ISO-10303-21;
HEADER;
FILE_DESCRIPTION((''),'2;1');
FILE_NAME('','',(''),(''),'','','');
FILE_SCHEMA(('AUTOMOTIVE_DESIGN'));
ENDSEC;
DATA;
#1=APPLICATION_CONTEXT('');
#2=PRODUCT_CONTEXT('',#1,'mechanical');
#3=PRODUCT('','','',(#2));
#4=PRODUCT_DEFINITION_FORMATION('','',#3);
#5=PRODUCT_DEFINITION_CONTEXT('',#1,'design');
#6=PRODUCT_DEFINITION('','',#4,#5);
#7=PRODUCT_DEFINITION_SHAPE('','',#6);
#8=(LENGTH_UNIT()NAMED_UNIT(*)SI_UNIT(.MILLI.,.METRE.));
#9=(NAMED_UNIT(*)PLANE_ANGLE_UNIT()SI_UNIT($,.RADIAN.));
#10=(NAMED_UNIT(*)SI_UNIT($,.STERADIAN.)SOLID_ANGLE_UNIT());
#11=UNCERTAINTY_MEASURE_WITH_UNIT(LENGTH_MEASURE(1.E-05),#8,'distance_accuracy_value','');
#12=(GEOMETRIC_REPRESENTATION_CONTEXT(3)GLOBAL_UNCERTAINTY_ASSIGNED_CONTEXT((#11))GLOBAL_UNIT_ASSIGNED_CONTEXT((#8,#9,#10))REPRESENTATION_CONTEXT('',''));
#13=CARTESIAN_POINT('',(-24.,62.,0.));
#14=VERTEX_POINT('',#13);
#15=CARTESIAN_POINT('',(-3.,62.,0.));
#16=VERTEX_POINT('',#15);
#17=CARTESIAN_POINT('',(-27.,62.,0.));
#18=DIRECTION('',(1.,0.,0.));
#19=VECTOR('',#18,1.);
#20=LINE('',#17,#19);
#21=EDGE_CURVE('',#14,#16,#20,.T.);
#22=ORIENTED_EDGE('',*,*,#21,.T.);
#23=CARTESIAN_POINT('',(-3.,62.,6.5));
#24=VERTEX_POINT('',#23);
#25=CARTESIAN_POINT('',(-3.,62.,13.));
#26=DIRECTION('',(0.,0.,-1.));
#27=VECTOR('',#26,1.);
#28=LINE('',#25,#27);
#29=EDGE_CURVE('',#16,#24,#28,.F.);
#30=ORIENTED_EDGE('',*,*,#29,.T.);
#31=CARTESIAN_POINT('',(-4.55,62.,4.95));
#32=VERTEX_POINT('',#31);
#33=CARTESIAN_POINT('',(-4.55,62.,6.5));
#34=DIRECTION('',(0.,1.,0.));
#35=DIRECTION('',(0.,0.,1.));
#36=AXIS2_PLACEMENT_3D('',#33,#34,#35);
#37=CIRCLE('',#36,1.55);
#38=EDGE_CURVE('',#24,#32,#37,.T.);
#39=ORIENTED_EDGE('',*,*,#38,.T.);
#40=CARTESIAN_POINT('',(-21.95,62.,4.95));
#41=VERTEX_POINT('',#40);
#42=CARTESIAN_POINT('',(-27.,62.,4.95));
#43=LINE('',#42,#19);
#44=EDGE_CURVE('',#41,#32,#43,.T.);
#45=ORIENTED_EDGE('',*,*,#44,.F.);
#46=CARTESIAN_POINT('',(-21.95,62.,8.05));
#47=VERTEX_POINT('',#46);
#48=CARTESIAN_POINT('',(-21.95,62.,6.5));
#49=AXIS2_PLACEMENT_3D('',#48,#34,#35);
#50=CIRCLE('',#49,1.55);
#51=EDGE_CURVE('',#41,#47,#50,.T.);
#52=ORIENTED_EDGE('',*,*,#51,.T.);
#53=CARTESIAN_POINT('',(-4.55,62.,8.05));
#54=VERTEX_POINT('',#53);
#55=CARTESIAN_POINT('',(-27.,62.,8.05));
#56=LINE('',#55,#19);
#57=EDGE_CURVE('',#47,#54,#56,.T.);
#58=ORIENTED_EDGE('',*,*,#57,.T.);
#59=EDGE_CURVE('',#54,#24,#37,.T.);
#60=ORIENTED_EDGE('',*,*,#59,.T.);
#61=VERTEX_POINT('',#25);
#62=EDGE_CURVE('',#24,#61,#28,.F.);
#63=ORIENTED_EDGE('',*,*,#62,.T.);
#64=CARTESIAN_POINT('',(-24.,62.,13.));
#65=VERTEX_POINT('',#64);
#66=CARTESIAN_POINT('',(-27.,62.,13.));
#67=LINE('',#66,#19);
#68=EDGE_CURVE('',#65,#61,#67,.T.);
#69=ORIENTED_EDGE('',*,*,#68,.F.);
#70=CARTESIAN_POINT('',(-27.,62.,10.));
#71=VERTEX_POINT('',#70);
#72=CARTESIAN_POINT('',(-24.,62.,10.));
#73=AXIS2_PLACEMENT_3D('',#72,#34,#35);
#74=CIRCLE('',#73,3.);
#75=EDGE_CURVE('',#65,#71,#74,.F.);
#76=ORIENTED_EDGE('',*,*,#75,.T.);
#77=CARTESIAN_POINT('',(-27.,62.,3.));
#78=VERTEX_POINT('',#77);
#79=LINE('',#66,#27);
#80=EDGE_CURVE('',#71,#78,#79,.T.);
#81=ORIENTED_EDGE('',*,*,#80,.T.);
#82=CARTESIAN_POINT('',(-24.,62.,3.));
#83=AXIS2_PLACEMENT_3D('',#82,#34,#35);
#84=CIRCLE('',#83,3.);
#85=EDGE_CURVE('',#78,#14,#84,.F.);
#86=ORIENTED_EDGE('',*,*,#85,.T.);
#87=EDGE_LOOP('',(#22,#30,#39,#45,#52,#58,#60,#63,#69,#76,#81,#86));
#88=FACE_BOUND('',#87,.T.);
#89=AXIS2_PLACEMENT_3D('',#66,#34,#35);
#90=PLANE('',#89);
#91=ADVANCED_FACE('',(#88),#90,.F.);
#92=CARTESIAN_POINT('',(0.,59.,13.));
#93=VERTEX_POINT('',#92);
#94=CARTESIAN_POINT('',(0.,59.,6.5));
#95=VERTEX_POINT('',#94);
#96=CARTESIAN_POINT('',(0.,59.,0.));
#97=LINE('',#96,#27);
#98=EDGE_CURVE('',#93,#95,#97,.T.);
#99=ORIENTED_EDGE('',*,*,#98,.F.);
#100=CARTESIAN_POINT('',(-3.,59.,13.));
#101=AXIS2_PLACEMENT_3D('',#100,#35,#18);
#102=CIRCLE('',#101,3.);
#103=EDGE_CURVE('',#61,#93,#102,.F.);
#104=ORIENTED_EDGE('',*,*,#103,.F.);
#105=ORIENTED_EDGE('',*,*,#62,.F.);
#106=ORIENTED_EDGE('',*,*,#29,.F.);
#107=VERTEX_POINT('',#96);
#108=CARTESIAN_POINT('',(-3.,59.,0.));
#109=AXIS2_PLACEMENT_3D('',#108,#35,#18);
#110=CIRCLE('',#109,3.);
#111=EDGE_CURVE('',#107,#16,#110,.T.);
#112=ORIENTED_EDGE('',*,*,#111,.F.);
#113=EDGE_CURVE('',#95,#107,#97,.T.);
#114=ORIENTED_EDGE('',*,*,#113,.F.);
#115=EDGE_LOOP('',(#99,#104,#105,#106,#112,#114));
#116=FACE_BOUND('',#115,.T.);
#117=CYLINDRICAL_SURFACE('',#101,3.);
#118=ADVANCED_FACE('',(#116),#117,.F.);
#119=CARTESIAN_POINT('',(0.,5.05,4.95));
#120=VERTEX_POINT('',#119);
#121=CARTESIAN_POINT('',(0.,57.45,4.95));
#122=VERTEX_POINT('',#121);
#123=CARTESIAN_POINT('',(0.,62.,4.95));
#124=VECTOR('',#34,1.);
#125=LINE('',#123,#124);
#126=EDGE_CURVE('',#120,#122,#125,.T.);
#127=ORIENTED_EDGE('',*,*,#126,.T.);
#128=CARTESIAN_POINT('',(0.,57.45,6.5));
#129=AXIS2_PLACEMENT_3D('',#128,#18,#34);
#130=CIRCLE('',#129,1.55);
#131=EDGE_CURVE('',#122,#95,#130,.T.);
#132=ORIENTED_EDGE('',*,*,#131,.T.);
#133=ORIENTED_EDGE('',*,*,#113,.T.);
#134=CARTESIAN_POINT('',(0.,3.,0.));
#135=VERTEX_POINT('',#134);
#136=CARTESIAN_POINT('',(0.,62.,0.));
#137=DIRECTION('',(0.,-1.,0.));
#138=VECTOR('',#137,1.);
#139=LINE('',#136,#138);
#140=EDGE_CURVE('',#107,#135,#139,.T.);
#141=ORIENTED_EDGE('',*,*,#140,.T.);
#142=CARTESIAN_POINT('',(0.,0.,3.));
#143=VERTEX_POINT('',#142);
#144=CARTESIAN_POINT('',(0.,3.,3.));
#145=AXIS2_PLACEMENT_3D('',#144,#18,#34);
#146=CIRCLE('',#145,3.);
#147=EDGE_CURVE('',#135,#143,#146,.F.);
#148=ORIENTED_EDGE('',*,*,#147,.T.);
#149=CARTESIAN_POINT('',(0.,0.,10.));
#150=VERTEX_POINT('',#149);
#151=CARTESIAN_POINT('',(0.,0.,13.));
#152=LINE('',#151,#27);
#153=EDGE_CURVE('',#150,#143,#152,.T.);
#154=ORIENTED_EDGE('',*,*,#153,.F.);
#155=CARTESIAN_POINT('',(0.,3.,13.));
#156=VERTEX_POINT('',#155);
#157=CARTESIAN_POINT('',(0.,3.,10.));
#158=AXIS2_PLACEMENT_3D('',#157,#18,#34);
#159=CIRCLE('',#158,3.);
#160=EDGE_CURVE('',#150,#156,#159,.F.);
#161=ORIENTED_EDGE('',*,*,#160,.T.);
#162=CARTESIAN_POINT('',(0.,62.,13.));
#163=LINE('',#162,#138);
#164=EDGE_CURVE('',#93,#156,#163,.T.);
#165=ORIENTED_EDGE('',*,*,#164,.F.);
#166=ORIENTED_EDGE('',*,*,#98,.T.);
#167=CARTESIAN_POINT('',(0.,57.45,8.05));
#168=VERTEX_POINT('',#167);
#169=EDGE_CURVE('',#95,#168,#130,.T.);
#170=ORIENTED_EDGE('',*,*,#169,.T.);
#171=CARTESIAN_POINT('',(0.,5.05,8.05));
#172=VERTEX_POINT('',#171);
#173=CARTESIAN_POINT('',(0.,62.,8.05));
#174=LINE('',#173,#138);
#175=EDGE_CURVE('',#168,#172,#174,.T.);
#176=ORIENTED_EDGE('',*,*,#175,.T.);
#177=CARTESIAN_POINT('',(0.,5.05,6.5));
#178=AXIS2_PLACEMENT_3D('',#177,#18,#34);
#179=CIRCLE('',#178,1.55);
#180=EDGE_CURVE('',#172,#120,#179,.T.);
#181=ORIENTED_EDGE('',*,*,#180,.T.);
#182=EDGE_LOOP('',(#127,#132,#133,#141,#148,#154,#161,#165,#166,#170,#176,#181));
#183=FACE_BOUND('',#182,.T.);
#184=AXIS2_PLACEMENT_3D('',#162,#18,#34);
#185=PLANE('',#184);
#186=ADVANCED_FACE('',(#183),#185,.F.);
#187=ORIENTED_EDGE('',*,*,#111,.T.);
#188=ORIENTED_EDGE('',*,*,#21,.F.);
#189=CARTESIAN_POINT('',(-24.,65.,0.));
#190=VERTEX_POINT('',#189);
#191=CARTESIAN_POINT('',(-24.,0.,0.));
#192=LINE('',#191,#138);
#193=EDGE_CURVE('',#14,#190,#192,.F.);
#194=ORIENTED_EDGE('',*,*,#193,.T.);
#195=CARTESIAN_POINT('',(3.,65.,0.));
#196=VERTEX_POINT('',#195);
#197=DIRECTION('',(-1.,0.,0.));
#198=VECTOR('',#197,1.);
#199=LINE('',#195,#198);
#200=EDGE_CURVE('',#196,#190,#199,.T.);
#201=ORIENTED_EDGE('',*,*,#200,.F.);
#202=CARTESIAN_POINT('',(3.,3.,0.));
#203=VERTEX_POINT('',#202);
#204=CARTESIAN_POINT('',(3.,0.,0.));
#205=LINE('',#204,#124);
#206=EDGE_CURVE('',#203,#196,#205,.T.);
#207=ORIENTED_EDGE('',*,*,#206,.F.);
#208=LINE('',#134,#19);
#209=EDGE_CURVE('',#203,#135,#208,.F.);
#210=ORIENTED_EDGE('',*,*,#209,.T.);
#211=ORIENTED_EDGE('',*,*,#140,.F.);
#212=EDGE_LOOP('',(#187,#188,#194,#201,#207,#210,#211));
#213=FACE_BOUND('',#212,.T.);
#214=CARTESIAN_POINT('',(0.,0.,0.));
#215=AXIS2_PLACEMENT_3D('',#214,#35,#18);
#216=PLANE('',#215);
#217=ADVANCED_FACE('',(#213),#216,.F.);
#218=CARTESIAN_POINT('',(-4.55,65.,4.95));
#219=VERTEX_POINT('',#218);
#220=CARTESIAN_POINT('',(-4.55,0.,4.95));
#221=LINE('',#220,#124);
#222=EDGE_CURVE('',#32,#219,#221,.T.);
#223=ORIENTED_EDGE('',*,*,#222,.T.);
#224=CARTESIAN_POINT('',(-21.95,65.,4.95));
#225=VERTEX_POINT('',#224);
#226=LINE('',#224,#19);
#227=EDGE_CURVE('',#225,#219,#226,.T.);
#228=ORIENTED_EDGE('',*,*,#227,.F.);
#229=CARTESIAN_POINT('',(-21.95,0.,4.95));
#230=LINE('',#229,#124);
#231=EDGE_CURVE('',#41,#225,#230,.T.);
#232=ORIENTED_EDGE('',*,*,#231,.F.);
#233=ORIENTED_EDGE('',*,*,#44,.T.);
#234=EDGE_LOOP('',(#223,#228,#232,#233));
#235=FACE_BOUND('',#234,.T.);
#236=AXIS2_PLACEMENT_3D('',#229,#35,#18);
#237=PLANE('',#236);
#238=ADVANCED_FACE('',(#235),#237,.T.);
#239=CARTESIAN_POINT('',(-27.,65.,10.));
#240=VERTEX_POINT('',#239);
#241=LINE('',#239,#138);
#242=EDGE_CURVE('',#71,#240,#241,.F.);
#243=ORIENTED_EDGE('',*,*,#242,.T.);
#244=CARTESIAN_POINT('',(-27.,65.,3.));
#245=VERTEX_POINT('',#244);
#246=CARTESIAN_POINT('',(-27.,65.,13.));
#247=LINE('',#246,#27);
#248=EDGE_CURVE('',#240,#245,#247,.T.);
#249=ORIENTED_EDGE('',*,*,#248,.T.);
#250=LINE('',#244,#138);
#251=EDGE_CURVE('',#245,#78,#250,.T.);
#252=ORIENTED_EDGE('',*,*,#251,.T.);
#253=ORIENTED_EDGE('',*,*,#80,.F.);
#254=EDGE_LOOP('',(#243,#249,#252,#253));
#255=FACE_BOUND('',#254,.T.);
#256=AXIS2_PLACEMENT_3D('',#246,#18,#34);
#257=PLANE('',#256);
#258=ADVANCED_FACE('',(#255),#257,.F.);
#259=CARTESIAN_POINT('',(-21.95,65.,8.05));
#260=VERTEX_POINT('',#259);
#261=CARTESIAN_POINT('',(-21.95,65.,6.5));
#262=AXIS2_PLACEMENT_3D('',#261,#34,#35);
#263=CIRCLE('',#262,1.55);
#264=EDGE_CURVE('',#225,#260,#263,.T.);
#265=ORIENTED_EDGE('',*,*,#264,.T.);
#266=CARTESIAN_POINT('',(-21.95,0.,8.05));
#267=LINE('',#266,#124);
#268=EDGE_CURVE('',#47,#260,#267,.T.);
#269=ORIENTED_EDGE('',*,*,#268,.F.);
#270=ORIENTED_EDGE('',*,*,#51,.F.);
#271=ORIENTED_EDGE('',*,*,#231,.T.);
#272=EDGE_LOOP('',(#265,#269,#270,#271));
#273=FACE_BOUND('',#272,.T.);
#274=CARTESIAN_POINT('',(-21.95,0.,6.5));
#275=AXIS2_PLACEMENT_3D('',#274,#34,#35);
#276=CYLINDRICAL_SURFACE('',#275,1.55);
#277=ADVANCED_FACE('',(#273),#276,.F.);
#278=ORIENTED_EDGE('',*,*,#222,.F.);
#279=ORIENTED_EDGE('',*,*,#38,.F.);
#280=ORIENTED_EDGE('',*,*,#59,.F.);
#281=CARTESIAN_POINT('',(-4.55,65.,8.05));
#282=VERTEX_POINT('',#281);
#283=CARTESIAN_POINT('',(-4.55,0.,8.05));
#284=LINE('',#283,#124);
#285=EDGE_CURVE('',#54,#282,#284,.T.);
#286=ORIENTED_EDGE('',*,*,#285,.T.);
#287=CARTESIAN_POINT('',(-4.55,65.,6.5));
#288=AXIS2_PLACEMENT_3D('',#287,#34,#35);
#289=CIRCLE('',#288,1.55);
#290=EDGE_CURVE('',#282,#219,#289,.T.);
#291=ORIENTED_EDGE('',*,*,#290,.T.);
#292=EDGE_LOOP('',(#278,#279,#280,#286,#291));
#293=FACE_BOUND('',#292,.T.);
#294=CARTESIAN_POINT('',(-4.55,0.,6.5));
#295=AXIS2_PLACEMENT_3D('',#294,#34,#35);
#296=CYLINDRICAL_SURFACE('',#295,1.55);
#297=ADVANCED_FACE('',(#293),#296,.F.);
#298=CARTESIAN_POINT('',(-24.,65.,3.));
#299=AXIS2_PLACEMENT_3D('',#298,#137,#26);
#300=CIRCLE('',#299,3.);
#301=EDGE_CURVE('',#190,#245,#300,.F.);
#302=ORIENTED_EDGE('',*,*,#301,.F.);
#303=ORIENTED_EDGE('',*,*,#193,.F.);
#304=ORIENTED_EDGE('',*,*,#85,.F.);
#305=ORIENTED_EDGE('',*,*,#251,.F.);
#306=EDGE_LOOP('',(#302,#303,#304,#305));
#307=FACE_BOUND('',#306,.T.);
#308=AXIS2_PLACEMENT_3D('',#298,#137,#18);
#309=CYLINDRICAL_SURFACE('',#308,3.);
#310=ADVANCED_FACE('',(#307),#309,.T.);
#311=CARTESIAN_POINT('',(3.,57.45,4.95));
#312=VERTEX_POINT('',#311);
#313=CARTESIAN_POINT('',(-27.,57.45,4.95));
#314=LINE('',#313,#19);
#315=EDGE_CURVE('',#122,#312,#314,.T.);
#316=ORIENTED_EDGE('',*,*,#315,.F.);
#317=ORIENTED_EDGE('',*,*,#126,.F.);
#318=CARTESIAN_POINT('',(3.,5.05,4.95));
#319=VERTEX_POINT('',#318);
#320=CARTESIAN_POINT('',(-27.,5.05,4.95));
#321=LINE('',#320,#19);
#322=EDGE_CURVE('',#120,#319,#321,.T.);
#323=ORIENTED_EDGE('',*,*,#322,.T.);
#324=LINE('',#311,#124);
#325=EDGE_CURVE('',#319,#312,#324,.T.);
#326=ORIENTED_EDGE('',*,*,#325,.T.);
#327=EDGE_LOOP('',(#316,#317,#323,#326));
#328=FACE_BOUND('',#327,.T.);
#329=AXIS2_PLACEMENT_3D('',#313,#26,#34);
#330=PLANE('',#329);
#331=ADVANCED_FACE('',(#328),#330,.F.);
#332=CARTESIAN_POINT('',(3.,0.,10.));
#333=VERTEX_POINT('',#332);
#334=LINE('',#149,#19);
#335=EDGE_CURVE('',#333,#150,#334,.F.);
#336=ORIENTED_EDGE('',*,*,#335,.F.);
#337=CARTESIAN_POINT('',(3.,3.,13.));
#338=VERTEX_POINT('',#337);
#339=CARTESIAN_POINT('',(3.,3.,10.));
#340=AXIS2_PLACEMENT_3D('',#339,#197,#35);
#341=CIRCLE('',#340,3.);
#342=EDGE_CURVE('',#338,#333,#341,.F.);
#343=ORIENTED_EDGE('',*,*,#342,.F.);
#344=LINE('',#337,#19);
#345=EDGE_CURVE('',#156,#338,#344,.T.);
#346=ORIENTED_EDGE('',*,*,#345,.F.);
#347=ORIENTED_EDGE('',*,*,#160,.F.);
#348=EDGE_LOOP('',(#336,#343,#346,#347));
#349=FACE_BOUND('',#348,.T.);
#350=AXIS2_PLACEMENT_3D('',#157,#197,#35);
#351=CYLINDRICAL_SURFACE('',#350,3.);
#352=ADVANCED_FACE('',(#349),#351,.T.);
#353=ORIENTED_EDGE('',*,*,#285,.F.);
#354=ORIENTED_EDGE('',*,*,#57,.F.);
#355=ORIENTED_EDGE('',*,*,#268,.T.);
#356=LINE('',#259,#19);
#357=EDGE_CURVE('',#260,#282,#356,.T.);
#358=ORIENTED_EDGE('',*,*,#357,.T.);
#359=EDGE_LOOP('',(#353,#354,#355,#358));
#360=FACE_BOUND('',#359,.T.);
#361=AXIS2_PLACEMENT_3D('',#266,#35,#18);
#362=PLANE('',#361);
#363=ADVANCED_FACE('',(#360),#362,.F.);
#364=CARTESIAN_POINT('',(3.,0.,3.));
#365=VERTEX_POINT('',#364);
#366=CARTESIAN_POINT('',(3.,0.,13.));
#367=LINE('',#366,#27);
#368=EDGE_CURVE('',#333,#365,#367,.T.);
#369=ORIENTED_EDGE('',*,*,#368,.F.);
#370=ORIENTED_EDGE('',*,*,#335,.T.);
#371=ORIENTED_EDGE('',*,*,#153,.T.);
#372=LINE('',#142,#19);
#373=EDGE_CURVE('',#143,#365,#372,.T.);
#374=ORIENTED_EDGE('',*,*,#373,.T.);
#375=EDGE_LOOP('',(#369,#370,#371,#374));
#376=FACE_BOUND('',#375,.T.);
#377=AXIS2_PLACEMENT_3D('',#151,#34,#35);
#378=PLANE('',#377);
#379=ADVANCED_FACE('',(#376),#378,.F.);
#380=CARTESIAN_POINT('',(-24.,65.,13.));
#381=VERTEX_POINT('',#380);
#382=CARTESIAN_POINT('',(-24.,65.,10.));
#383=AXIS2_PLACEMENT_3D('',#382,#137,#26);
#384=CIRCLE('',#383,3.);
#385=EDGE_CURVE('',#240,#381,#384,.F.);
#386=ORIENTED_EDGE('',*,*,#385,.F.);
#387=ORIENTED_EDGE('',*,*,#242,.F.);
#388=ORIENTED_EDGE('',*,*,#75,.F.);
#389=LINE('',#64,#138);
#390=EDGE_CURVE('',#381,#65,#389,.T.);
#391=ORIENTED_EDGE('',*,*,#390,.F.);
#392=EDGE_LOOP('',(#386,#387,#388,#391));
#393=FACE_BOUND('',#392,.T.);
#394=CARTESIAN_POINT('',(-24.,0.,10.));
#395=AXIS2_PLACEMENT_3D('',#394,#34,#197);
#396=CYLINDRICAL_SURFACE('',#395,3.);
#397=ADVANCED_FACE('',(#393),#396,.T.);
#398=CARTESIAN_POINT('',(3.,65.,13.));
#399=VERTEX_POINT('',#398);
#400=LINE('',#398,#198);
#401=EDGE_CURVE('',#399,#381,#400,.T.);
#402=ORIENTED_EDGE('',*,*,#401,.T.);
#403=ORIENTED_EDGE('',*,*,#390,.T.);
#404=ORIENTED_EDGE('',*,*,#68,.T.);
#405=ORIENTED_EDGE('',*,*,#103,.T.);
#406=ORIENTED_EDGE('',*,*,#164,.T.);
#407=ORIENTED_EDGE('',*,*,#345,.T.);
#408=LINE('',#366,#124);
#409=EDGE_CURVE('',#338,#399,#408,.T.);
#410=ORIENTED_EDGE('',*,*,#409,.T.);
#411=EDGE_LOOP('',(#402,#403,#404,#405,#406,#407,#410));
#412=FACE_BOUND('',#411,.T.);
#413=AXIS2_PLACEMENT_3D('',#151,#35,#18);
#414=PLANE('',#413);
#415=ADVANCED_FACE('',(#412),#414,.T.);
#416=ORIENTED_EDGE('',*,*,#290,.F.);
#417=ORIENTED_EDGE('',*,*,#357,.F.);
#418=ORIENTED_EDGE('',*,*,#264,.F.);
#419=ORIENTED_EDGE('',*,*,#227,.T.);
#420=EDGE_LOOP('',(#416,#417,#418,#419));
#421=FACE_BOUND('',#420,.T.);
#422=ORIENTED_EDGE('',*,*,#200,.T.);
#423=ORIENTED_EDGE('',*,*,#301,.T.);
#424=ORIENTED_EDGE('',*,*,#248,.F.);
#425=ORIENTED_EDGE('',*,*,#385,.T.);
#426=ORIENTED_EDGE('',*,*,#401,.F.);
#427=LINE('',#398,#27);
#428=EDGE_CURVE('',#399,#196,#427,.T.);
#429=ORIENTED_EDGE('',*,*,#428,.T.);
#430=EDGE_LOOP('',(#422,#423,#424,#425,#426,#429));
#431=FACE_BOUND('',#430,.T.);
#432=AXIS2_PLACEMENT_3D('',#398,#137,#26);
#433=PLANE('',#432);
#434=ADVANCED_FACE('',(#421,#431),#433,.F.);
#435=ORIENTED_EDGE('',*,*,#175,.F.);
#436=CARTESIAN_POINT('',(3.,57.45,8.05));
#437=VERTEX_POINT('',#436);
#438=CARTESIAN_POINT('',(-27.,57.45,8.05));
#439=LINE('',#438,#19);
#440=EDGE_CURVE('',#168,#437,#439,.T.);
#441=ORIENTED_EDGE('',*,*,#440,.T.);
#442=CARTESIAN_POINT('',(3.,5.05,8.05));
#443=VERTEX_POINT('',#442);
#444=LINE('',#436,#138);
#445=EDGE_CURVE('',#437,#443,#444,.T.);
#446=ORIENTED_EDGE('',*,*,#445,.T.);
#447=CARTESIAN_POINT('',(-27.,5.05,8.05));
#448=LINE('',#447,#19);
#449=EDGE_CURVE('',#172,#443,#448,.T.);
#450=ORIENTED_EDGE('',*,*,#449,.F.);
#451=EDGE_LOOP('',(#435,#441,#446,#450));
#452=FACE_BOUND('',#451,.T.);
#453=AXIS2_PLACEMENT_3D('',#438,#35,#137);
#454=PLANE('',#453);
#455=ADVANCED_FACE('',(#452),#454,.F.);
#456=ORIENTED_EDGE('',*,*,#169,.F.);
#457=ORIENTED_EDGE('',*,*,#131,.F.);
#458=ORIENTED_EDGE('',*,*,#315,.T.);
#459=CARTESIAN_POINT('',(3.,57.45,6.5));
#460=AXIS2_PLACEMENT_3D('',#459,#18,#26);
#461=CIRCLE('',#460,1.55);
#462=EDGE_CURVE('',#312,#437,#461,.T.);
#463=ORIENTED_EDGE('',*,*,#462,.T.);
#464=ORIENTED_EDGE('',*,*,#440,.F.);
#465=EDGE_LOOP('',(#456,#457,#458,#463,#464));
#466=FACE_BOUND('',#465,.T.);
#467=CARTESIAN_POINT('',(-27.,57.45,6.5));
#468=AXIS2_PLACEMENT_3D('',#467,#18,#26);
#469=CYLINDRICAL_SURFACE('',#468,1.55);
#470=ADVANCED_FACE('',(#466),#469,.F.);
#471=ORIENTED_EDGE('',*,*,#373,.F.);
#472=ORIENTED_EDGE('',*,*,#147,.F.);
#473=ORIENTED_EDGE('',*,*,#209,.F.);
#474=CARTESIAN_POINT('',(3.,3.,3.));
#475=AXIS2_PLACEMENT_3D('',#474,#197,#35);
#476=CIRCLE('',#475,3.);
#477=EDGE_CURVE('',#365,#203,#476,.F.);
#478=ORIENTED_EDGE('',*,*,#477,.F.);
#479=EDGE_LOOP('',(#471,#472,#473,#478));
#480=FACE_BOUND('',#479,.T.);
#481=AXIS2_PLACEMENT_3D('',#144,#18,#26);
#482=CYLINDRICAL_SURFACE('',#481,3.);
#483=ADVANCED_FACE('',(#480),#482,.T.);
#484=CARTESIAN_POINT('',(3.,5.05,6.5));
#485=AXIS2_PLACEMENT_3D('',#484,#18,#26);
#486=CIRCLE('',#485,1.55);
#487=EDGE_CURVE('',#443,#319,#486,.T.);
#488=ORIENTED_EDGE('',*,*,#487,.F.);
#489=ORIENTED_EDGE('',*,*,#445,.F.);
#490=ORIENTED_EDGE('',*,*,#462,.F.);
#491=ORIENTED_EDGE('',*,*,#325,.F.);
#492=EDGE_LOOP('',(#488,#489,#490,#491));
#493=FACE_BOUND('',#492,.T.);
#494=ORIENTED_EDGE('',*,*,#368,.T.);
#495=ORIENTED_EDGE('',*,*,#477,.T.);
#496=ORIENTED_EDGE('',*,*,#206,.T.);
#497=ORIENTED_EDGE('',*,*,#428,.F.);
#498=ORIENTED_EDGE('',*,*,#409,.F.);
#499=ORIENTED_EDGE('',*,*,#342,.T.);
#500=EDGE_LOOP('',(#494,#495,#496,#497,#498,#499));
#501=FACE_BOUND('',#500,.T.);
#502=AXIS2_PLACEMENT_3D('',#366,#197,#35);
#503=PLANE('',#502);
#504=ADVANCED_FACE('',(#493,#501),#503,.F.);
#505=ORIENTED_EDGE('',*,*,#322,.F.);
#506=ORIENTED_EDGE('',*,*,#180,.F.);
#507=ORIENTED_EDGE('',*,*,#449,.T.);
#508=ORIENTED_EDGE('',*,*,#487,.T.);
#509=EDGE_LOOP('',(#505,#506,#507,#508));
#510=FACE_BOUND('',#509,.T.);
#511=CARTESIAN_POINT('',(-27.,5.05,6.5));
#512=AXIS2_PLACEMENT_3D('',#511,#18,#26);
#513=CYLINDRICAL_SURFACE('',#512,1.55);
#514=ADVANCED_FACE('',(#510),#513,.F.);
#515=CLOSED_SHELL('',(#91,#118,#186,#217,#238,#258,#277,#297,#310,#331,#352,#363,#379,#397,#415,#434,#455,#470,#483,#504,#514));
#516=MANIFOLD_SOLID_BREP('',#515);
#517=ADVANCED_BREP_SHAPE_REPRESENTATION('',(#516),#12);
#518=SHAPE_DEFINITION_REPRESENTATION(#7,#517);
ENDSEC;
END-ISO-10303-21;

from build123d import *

# Parameters (mm, degrees)
BOSS_EXTRUDE1_DEPTH = 13
CUT_EXTRUDE1_DEPTH  = 73.759879054
CUT_EXTRUDE2_DEPTH  = 72.575135347
FILLET1_R           = 3
FILLET2_R           = 3


with BuildPart() as part:
    # Sketch1 → Boss-Extrude1 (new body)
    with BuildSketch(Plane.XY):
        Polygon((0, 0), (3, 0), (3, 65), (-27, 65), (-27, 62), (0, 62), align=None)
    extrude(amount=BOSS_EXTRUDE1_DEPTH)

    # Sketch6 → Cut-Extrude1 (cut, through all)
    with BuildSketch(Plane(origin=(3, 0, 0), x_dir=(0, 0, -1), z_dir=(1, 0, 0))):
        with BuildLine():
            Line((-4.95, 57.45), (-4.95, 5.05))
            ThreePointArc((-4.95, 5.05), (-6.5, 3.5), (-8.05, 5.05))
            Line((-8.05, 5.05), (-8.05, 57.45))
            ThreePointArc((-8.05, 57.45), (-6.5, 59), (-4.95, 57.45))
        make_face()
    extrude(amount=-CUT_EXTRUDE1_DEPTH, mode=Mode.SUBTRACT)

    # Sketch7 → Cut-Extrude2 (cut, through all)
    with BuildSketch(Plane(origin=(0, 65, 0), x_dir=(1, 0, 0), z_dir=(0, 1, 0))):
        with BuildLine():
            Line((-21.95, -4.95), (-4.55, -4.95))
            ThreePointArc((-4.55, -4.95), (-3, -6.5), (-4.55, -8.05))
            Line((-4.55, -8.05), (-21.95, -8.05))
            ThreePointArc((-21.95, -8.05), (-23.5, -6.5), (-21.95, -4.95))
        make_face()
    extrude(amount=-CUT_EXTRUDE2_DEPTH, mode=Mode.SUBTRACT)

    # Fillet1
    fillet1_edges = [part.edges().sort_by_distance(p)[0] for p in [
        (0, 62, 6.5),
    ]]
    fillet(fillet1_edges, radius=FILLET1_R - 0.0001)  # a hair under: the kernel refuses the full size

    # Fillet2
    fillet2_edges = [part.edges().sort_by_distance(p)[0] for p in [
        (-27, 63.5, 13),
        (-27, 63.5, 0),
        (1.5, 0, 0),
        (1.5, 0, 13),
    ]]
    fillet(fillet2_edges, radius=FILLET2_R)


solid = part.part
